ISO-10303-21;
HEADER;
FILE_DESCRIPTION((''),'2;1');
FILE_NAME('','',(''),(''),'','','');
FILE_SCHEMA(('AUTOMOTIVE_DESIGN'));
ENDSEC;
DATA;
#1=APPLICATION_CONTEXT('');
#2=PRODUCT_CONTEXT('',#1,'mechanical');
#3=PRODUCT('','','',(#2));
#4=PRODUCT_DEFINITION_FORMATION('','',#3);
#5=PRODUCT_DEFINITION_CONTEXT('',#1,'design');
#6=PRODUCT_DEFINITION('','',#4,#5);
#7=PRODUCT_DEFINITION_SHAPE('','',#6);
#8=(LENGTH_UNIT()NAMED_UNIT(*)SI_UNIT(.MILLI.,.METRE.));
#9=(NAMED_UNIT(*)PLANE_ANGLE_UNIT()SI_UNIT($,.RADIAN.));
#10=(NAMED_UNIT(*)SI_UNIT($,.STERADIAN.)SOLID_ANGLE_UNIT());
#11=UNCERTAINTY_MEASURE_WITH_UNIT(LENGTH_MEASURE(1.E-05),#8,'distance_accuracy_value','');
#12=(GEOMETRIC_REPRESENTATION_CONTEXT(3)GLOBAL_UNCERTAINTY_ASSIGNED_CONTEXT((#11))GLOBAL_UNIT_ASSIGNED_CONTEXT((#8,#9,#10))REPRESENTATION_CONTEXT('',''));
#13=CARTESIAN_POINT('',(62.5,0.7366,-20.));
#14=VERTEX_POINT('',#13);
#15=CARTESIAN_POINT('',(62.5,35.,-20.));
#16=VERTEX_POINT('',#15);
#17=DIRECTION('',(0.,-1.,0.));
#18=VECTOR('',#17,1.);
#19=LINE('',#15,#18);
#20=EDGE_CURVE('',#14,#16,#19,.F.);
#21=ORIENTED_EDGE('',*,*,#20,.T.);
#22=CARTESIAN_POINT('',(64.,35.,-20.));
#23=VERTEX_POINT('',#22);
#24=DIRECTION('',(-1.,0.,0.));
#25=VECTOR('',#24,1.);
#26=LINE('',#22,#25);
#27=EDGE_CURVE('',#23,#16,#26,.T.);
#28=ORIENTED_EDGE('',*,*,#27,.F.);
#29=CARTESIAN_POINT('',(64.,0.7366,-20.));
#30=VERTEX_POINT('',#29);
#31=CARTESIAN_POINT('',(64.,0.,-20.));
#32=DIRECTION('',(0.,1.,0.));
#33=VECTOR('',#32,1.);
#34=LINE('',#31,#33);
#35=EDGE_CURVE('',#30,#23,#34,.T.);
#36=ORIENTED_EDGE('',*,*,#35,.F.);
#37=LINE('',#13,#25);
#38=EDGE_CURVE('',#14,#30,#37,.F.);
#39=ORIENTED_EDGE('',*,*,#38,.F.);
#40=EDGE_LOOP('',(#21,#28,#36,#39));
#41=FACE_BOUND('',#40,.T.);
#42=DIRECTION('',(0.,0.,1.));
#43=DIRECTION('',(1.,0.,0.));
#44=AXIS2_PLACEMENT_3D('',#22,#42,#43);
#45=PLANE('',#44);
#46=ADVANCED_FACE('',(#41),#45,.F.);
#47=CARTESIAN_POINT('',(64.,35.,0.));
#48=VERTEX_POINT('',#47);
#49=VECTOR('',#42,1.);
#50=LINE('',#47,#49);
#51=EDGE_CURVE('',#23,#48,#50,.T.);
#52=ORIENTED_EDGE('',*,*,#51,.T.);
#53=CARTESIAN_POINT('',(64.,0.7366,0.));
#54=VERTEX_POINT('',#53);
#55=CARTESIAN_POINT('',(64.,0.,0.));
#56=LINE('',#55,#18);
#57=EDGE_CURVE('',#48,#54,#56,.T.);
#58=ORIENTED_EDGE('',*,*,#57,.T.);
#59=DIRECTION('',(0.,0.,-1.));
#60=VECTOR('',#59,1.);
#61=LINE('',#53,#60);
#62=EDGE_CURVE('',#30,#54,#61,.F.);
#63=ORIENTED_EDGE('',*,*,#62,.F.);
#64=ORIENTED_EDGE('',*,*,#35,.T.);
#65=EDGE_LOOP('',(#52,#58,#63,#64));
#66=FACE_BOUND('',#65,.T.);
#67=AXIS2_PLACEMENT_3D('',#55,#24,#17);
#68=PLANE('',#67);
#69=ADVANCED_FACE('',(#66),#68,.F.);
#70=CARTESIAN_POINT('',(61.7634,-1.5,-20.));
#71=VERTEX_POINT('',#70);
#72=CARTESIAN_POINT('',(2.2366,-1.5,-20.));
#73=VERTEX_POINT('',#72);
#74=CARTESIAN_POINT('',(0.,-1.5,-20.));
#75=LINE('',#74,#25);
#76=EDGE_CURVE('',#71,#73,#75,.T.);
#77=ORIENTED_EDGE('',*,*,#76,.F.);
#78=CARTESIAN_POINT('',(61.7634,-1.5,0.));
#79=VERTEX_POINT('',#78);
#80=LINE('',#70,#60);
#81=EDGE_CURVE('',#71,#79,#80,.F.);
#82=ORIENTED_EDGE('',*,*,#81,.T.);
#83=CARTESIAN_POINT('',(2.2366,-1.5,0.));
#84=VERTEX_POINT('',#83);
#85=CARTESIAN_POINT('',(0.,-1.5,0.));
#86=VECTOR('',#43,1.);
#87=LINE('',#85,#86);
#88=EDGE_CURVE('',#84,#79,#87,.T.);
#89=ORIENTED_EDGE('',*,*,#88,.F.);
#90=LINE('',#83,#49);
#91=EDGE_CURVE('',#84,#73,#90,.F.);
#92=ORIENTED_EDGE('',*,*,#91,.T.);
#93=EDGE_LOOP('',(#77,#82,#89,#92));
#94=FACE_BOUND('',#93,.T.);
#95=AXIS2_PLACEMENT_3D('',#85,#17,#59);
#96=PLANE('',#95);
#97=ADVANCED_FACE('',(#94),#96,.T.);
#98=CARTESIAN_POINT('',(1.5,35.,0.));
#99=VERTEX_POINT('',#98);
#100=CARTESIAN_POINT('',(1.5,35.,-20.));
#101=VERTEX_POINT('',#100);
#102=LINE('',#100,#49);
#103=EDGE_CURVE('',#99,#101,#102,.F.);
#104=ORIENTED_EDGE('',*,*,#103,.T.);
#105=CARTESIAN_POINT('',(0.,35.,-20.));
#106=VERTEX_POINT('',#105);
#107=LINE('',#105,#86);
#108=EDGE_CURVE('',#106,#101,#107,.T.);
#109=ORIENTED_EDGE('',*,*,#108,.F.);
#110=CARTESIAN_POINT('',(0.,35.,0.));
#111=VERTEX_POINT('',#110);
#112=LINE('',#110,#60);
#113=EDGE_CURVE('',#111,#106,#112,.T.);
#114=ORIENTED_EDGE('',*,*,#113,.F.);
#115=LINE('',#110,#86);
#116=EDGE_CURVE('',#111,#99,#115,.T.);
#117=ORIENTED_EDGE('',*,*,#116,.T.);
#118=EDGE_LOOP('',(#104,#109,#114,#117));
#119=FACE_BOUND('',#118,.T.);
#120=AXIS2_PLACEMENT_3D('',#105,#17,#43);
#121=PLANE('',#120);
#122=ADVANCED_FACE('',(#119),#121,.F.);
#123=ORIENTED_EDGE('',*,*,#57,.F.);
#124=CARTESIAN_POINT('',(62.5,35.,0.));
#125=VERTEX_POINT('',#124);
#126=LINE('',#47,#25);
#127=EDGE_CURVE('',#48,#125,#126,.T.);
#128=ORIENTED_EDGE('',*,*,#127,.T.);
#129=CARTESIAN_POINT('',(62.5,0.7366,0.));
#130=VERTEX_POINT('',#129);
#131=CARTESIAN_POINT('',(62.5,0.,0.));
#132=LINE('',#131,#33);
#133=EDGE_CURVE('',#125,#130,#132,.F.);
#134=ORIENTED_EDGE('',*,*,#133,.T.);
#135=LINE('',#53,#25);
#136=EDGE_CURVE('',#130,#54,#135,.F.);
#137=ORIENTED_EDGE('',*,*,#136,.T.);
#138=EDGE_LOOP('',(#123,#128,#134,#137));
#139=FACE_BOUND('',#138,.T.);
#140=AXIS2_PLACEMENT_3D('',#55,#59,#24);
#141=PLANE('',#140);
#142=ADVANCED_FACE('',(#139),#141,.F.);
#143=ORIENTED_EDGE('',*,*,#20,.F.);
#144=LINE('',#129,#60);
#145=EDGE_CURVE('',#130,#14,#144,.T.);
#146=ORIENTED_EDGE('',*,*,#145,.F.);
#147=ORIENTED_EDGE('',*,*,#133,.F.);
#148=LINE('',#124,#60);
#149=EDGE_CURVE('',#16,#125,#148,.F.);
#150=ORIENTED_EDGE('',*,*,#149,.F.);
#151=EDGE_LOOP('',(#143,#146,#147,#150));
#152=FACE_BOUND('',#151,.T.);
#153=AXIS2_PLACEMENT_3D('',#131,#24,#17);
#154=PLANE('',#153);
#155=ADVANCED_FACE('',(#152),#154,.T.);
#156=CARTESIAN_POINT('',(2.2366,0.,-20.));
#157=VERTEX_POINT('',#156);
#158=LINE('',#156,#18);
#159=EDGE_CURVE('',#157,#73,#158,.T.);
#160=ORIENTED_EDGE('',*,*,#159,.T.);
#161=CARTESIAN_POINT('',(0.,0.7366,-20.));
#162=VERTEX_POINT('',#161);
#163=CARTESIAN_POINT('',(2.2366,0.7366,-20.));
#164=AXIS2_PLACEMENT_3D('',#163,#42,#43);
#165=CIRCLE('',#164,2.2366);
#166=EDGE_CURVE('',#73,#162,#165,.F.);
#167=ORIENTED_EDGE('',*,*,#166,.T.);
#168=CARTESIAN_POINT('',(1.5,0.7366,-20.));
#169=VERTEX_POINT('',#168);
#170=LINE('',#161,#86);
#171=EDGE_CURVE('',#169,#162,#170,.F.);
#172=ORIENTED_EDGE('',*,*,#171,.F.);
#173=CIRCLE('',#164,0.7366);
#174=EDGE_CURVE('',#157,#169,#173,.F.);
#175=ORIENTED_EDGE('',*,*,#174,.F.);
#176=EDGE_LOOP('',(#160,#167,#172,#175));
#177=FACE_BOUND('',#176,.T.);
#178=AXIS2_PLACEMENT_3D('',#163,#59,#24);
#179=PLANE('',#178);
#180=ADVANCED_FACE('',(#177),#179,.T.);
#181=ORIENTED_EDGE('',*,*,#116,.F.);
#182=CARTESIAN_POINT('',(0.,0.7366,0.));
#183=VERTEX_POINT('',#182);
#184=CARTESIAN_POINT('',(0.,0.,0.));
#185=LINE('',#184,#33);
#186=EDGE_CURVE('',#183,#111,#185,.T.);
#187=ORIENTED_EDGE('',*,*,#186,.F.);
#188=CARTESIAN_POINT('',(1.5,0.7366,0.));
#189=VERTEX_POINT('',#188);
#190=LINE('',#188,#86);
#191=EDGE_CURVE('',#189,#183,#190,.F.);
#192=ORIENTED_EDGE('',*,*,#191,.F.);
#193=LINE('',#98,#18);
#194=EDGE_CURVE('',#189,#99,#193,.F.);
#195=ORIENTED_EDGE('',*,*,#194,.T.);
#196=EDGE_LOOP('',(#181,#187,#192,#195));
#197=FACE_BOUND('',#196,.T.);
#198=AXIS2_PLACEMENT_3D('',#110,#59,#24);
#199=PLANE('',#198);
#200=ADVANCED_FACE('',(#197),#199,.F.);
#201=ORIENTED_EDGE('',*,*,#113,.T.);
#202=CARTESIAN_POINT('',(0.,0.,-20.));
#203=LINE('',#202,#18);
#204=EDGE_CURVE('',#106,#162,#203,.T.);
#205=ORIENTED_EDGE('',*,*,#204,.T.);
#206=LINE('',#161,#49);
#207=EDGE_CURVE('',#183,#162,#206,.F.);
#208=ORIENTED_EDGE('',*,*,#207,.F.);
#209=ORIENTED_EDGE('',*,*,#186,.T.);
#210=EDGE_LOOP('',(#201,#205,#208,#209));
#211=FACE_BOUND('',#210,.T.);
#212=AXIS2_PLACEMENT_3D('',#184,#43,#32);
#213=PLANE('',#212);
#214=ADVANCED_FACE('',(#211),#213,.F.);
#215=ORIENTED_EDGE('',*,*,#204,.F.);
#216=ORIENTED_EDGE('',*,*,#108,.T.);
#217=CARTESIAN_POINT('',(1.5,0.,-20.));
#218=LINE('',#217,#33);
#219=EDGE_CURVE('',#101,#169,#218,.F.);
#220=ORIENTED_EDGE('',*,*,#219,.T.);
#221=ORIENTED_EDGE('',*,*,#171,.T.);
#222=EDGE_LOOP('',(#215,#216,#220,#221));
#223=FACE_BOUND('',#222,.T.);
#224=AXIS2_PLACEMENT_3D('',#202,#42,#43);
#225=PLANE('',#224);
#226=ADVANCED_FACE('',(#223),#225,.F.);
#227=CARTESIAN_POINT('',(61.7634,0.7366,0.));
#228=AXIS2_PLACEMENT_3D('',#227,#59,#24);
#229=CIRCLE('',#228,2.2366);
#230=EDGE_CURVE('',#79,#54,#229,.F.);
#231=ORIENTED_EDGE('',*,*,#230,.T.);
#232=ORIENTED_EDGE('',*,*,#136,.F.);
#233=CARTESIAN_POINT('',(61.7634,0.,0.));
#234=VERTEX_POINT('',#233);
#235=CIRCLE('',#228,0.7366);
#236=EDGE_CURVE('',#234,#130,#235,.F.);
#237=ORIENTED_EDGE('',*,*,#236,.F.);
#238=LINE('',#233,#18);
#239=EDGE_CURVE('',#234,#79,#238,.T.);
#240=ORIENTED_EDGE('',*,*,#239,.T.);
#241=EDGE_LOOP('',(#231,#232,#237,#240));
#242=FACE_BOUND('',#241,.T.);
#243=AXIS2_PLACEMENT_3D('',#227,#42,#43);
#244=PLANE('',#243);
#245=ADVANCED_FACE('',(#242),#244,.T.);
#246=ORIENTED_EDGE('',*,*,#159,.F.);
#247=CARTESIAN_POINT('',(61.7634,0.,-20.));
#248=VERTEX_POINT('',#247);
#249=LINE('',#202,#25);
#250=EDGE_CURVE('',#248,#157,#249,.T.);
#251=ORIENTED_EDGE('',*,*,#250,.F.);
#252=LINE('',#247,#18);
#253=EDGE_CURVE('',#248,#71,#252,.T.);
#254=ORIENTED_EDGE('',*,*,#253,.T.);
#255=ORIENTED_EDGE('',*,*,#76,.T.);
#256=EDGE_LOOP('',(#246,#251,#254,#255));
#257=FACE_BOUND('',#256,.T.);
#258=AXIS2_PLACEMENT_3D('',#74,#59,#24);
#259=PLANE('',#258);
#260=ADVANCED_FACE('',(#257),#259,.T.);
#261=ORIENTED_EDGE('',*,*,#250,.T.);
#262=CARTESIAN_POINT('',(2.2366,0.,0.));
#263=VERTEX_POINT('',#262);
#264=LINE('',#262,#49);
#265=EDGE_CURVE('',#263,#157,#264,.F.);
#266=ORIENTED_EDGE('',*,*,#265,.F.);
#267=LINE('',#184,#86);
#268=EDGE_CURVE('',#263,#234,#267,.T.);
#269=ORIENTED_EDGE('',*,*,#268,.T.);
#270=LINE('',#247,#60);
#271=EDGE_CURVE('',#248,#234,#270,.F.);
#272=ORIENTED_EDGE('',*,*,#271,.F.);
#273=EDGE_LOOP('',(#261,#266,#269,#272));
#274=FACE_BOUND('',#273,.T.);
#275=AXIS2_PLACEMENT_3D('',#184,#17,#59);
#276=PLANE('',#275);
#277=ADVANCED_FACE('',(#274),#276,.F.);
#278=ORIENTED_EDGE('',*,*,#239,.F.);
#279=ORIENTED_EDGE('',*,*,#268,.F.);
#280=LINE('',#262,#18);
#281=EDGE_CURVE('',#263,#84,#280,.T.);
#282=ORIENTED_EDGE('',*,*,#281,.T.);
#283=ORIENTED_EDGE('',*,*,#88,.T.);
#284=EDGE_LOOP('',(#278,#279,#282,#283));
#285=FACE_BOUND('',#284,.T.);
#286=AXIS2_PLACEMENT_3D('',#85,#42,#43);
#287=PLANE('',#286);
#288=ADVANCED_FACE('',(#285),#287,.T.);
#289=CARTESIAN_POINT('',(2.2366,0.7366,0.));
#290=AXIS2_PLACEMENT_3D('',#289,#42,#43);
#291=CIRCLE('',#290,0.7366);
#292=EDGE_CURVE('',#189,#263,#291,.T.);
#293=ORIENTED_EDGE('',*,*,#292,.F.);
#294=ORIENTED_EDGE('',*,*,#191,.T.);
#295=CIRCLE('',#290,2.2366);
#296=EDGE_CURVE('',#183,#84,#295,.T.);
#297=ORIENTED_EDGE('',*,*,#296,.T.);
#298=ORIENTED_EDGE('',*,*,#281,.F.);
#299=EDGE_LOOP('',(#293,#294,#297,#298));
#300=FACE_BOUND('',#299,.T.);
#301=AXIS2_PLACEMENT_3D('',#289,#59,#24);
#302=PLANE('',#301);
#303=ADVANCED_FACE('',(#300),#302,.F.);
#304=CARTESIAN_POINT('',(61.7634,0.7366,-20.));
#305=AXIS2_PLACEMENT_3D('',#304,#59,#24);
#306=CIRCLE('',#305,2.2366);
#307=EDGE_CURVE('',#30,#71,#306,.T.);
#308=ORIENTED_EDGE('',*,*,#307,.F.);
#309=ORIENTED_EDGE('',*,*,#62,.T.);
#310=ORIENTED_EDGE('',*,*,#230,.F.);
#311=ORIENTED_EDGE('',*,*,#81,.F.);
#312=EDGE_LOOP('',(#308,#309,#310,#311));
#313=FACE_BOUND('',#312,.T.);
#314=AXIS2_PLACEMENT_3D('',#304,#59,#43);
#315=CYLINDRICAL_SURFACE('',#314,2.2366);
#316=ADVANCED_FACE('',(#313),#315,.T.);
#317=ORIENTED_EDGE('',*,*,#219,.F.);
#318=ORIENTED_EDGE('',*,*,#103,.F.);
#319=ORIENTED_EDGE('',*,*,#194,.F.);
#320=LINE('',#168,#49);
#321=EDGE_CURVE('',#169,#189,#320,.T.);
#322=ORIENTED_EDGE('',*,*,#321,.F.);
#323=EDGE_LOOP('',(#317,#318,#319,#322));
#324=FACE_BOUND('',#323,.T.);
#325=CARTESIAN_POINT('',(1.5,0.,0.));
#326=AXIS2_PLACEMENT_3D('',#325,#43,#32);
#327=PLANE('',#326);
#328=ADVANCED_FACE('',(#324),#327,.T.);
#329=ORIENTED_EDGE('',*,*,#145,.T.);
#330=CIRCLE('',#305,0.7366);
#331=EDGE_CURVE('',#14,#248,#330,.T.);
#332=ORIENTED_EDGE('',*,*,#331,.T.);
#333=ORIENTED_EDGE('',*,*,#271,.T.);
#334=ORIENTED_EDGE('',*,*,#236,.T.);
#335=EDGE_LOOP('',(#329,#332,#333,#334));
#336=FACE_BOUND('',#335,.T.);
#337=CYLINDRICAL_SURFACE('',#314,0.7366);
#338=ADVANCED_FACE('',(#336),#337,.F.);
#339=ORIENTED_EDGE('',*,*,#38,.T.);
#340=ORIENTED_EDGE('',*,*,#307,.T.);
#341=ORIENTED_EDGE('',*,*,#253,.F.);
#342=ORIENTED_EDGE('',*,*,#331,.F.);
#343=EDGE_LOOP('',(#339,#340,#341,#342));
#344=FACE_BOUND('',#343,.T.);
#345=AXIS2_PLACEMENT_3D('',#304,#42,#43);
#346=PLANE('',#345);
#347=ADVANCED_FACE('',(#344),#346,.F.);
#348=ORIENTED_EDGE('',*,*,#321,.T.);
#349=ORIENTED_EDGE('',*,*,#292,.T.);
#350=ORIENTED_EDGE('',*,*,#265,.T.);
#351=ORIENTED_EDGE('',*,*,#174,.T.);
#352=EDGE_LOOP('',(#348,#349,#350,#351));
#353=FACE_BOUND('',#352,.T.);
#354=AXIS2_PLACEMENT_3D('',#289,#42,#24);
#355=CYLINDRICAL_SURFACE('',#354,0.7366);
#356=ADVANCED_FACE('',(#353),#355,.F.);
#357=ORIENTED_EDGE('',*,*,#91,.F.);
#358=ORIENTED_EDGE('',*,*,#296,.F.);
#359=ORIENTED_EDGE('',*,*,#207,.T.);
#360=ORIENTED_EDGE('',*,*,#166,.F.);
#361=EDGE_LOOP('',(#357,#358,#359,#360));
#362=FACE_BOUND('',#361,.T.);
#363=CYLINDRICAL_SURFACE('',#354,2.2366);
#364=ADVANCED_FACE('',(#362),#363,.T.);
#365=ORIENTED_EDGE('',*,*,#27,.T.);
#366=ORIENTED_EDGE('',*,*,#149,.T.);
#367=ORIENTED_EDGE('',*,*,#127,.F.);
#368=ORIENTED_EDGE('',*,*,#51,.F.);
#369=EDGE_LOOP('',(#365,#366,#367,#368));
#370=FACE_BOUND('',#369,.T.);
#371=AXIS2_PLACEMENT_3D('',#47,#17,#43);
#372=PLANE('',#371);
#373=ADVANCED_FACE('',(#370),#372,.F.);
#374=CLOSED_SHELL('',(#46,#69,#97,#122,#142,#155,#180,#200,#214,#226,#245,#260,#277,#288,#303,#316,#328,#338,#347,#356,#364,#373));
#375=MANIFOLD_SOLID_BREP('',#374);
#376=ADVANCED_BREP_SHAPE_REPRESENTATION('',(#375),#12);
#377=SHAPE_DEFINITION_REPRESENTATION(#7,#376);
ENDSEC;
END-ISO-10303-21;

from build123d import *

# Parameters (mm, degrees)
SKETCH_1_W                       = 64
SKETCH_1_H                       = 20
SM_BASE_FLANGE_1_DEPTH           = 1.5
SM_EDGE_FLANGE_1_STRIP_W         = 7.4732
SM_EDGE_FLANGE_1_STRIP_H         = 1.5
SM_EDGE_FLANGE_1_STRIP_CUT_DEPTH = 20
SM_EDGE_FLANGE_1_DEPTH           = 20
SM_EDGE_FLANGE_2_STRIP_W         = 7.4732
SM_EDGE_FLANGE_2_STRIP_H         = 1.5
SM_EDGE_FLANGE_2_STRIP_CUT_DEPTH = 20
SM_EDGE_FLANGE_2_DEPTH           = 20


# Sheet-metal steps are written as plain solids
with BuildPart() as part:
    # Sketch 1 → Базовая кромка1 (new body)
    with BuildSketch(Plane(origin=(0, 0, 0), x_dir=(1, 0, 0), z_dir=(0, 1, 0))):
        with Locations((32, 10)):
            Rectangle(SKETCH_1_W, SKETCH_1_H)
    extrude(amount=-SM_BASE_FLANGE_1_DEPTH)

    # Ребро-кромка1 strip (across the edge) → Ребро-кромка1 strip cut (cut)
    with BuildSketch(Plane.XY.offset(-20)):
        with Locations((-1.5, -0.75)):
            Rectangle(SM_EDGE_FLANGE_1_STRIP_W, SM_EDGE_FLANGE_1_STRIP_H)
    extrude(amount=SM_EDGE_FLANGE_1_STRIP_CUT_DEPTH, mode=Mode.SUBTRACT)

    # Ребро-кромка1 section (across the edge) → Ребро-кромка1 (add)
    with BuildSketch(Plane.XY.offset(-20)):
        with BuildLine():
            Line((0, 0.7366), (0, 35))
            Line((0, 35), (1.5, 35))
            Line((1.5, 35), (1.5, 0.7366))
            ThreePointArc((1.5, 0.7366), (1.715745145, 0.215745145), (2.2366, 0))
            Line((2.2366, 0), (2.2366, -1.5))
            ThreePointArc((2.2366, -1.5), (0.655084973, -0.844915027), (0, 0.7366))
        make_face()
    extrude(amount=SM_EDGE_FLANGE_1_DEPTH)

    # Ребро-кромка2 strip (across the edge) → Ребро-кромка2 strip cut (cut)
    with BuildSketch(Plane(origin=(64, 0, 0), x_dir=(-1, 0, 0), z_dir=(0, 0, -1))):
        with Locations((-1.5, -0.75)):
            Rectangle(SM_EDGE_FLANGE_2_STRIP_W, SM_EDGE_FLANGE_2_STRIP_H)
    extrude(amount=SM_EDGE_FLANGE_2_STRIP_CUT_DEPTH, mode=Mode.SUBTRACT)

    # Ребро-кромка2 section (across the edge) → Ребро-кромка2 (add)
    with BuildSketch(Plane(origin=(64, 0, 0), x_dir=(-1, 0, 0), z_dir=(0, 0, -1))):
        with BuildLine():
            Line((0, 0.7366), (0, 35))
            Line((0, 35), (1.5, 35))
            Line((1.5, 35), (1.5, 0.7366))
            ThreePointArc((1.5, 0.7366), (1.715745145, 0.215745145), (2.2366, 0))
            Line((2.2366, 0), (2.2366, -1.5))
            ThreePointArc((2.2366, -1.5), (0.655084973, -0.844915027), (0, 0.7366))
        make_face()
    extrude(amount=SM_EDGE_FLANGE_2_DEPTH)


solid = part.part
